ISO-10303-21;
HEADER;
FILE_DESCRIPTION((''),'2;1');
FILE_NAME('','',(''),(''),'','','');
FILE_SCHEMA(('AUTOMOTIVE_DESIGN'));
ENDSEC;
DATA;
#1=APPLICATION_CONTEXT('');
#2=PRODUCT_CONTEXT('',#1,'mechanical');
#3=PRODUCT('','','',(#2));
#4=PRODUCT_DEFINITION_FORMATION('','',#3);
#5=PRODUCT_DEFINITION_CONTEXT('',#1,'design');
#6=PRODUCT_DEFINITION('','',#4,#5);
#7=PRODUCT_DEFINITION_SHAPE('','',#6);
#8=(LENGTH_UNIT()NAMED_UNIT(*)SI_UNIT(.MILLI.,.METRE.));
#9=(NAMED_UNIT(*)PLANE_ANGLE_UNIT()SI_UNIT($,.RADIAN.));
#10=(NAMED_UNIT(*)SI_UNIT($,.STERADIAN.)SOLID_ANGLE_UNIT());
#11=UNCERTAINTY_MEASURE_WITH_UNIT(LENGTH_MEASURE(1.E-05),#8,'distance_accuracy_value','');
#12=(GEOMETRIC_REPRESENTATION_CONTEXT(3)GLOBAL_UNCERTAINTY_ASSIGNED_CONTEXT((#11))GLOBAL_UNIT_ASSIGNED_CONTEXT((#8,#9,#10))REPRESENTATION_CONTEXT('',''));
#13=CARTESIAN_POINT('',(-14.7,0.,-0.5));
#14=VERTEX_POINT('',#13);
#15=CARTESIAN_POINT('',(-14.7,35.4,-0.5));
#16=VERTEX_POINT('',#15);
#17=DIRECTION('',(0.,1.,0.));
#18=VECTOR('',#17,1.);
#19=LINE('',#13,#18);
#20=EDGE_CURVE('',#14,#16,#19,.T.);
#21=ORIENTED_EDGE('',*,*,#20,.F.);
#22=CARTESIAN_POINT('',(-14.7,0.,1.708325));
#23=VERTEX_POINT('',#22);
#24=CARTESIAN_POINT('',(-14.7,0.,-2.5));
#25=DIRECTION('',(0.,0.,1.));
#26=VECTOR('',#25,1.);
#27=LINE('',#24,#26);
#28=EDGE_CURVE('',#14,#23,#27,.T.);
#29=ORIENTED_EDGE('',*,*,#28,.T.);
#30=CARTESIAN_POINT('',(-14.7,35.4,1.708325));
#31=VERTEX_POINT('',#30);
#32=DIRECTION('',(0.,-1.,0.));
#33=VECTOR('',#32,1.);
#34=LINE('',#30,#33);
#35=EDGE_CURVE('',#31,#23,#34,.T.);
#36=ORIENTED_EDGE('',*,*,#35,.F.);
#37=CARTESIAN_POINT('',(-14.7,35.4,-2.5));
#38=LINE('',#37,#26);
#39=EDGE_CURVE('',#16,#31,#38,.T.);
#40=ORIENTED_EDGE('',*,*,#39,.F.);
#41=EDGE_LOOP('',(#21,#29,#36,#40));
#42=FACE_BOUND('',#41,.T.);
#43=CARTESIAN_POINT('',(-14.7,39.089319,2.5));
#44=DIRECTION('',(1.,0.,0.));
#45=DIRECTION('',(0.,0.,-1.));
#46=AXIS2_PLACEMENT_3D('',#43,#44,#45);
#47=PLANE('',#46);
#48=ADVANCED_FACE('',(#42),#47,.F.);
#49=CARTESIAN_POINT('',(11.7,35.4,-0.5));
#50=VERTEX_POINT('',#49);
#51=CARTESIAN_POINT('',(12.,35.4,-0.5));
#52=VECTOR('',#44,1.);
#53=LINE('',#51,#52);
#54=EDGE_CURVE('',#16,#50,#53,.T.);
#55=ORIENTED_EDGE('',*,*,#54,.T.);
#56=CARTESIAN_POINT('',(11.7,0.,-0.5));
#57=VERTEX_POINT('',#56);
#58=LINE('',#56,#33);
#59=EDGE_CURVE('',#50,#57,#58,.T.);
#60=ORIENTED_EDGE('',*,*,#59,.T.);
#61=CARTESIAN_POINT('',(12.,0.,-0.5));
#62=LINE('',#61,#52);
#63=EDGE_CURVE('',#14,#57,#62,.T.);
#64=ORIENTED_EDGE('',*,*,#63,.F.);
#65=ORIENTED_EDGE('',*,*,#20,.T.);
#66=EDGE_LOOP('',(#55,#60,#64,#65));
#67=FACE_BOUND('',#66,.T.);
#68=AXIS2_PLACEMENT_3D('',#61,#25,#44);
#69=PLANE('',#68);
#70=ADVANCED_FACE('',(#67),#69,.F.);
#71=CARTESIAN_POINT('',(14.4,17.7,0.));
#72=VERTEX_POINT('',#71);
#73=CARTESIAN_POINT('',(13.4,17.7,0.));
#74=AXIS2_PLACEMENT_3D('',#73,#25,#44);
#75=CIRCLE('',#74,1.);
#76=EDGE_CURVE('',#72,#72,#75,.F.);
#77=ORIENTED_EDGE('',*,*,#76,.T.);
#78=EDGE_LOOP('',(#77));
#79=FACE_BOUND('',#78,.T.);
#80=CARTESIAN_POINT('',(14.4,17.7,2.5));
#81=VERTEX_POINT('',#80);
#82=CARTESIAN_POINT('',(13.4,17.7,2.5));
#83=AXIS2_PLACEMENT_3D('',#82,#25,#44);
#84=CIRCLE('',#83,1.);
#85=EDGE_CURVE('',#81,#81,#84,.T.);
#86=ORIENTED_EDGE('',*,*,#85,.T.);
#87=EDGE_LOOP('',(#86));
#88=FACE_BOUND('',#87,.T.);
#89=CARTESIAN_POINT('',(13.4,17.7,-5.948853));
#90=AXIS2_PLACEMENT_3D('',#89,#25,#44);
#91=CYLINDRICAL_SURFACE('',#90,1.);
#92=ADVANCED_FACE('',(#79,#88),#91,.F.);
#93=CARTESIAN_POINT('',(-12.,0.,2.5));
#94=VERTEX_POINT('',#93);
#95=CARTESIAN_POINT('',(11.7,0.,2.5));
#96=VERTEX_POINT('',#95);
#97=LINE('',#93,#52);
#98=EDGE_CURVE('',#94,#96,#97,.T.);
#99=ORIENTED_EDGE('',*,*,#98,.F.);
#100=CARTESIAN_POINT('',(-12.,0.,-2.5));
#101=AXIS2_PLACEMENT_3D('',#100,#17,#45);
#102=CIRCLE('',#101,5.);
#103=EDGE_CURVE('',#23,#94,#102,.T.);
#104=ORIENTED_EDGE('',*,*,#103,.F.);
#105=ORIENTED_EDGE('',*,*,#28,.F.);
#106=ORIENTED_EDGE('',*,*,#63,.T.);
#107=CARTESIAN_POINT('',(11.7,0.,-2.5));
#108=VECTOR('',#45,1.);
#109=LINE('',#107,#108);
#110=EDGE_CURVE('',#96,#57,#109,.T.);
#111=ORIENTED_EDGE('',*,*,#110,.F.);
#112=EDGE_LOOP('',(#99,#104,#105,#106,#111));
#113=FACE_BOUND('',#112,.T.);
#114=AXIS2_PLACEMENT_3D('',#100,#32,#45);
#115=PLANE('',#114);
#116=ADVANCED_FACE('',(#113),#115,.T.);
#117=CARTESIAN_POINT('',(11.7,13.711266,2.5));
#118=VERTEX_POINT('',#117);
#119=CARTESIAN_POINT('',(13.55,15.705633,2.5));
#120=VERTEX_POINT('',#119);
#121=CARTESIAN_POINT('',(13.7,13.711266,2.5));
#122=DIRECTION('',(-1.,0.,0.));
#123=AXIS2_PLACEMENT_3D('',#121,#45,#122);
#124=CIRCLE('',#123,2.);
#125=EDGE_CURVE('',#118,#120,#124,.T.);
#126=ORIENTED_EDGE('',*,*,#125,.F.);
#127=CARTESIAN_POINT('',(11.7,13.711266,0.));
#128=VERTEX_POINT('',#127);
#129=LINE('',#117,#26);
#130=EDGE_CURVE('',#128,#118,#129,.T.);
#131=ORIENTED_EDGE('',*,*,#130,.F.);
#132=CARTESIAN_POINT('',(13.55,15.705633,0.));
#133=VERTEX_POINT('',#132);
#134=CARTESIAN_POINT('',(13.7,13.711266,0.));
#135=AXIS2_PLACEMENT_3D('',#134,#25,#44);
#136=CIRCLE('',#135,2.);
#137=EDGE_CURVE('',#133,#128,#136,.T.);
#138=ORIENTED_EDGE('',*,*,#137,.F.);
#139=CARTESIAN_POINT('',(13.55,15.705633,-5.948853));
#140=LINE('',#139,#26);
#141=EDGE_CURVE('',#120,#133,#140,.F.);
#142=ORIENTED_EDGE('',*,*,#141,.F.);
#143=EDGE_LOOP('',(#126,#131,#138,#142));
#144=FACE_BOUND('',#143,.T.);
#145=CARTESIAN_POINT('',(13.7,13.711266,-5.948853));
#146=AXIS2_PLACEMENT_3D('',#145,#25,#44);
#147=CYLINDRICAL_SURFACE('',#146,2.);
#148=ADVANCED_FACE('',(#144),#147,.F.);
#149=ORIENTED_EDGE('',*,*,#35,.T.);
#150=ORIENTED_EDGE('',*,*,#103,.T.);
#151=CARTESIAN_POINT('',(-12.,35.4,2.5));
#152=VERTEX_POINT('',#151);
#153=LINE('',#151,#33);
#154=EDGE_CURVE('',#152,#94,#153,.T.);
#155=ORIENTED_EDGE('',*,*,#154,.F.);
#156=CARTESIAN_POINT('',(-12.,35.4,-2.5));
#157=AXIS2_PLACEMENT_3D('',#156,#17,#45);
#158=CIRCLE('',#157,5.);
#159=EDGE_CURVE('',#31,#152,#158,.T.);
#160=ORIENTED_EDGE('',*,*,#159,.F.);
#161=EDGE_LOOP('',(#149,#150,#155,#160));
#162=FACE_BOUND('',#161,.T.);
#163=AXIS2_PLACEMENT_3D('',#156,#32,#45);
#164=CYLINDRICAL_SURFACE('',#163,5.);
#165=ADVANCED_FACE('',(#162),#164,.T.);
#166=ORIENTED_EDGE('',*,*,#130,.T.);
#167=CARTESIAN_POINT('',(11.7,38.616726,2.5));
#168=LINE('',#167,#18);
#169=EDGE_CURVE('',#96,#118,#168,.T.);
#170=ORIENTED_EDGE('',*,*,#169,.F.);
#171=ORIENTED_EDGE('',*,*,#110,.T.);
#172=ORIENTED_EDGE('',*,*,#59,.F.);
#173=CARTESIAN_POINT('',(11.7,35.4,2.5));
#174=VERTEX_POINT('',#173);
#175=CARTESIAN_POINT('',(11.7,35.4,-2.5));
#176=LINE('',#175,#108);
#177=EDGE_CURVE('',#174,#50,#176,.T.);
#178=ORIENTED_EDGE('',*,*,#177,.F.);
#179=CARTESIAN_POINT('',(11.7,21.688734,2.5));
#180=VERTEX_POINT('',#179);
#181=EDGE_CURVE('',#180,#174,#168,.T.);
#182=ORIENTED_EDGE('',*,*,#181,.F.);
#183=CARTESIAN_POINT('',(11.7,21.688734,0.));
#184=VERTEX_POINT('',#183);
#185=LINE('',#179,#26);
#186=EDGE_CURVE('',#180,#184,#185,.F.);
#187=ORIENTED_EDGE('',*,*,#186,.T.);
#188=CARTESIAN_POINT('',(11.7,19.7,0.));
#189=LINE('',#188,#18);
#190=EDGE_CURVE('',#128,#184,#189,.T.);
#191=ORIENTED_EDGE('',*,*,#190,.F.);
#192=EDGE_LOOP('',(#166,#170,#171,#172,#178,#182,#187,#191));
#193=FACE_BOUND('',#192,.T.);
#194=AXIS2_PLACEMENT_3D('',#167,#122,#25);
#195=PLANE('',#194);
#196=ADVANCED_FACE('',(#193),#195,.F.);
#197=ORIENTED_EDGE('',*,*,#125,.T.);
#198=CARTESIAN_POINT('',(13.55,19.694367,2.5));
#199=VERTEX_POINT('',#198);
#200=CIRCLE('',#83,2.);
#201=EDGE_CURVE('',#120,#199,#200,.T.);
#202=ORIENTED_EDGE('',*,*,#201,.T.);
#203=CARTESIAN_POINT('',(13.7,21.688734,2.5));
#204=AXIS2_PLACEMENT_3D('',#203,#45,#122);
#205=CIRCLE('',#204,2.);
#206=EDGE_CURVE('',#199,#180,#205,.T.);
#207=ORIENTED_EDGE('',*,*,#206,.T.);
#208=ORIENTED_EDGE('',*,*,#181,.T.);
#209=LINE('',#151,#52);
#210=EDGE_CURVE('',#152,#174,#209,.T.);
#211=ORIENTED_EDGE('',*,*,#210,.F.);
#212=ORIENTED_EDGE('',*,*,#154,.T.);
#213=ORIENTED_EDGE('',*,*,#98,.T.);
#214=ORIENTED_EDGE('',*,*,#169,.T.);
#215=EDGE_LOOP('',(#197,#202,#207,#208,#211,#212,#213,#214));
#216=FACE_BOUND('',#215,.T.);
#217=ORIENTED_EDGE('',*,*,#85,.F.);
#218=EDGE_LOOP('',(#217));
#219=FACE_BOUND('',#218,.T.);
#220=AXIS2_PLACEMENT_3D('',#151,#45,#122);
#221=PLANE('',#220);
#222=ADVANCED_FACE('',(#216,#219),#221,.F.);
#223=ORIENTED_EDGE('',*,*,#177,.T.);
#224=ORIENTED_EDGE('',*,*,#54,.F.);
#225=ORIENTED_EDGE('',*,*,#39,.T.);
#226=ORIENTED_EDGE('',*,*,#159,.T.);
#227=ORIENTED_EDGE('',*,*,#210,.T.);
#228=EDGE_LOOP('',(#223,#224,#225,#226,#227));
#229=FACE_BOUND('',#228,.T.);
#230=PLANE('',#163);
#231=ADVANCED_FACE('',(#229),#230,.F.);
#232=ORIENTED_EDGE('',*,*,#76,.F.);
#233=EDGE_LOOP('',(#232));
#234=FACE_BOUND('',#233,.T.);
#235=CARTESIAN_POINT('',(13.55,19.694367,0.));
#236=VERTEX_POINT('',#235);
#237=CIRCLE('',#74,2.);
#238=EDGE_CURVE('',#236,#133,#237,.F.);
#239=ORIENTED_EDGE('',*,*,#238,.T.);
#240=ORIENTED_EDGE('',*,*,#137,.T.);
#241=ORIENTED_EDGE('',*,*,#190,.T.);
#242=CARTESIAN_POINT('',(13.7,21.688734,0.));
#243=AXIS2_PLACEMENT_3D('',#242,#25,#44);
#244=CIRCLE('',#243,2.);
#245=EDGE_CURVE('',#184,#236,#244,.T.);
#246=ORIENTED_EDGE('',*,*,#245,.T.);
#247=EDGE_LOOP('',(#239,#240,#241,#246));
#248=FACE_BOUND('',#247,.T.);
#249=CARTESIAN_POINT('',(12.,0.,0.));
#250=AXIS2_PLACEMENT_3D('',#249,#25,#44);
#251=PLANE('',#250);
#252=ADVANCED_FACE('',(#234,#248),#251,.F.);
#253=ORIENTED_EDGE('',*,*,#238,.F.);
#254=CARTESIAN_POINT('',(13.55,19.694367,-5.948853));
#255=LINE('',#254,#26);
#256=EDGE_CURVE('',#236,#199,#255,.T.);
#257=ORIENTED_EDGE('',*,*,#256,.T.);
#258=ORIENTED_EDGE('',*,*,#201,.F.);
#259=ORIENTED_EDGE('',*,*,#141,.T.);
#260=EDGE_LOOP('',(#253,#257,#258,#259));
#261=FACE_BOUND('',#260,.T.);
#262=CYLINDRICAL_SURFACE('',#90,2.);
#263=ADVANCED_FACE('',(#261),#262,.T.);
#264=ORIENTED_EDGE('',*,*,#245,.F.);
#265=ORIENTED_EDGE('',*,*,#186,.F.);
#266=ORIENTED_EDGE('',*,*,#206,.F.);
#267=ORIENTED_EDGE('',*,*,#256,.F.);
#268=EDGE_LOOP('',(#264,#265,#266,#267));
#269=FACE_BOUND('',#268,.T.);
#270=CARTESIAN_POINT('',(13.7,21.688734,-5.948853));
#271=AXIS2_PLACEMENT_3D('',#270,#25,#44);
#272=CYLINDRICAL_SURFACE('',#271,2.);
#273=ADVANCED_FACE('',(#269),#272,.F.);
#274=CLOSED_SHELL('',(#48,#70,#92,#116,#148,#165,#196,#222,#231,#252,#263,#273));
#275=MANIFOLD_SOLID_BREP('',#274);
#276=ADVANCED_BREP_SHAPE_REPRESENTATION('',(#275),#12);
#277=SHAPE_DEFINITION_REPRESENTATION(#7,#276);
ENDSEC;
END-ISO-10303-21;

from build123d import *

# Parameters (mm, degrees)
BOSS_EXTRUDE1_DEPTH = 35.4
SKETCH2_W           = 28.62824493
SKETCH2_H           = 44.507069041
CUT_EXTRUDE1_DEPTH  = 36
SKETCH3_W           = 27
SKETCH3_H           = 2
CUT_EXTRUDE2_DEPTH  = 39.528041736
SKETCH4_W           = 4.666859097
SKETCH4_H           = 39.875061907
SKETCH4_W_2         = 6.439084071
SKETCH4_H_2         = 41.174693554
CUT_EXTRUDE3_DEPTH  = 39.563713514
SKETCH5_R           = 1
BOSS_EXTRUDE2_DEPTH = 2.5
FILLET1_R           = 2


with BuildPart() as part:
    # Sketch1 → Boss-Extrude1 (new body)
    with BuildSketch(Plane(origin=(0, 0, 0), x_dir=(1, 0, 0), z_dir=(0, 1, 0))):
        with BuildLine():
            Line((-17, 2.5), (-12, 2.5))
            Line((-12, 2.5), (12, 2.5))
            Line((12, 2.5), (12, -2.5))
            Line((12, -2.5), (-12, -2.5))
            ThreePointArc((-12, -2.5), (-15.535533906, -1.035533906), (-17, 2.5))
        make_face()
    extrude(amount=BOSS_EXTRUDE1_DEPTH)

    # Sketch2 → Cut-Extrude1 (cut)
    with BuildSketch(Plane(origin=(0, 0, -2.5), x_dir=(-1, 0, 0), z_dir=(0, 0, -1))):
        with Locations((29.314122465, 17.150131431)):
            Rectangle(SKETCH2_W, SKETCH2_H)
    extrude(amount=-CUT_EXTRUDE1_DEPTH, mode=Mode.SUBTRACT)

    # Sketch3 → Cut-Extrude2 (cut, through all)
    with BuildSketch(Plane(origin=(0, 35.4, 0), x_dir=(1, 0, 0), z_dir=(0, 1, 0))):
        with Locations((-1.5, 1.5)):
            Rectangle(SKETCH3_W, SKETCH3_H)
    extrude(amount=-CUT_EXTRUDE2_DEPTH, mode=Mode.SUBTRACT)

    # Sketch4 → Cut-Extrude3 (cut, through all)
    with BuildSketch(Plane(origin=(0, 0, -0.5), x_dir=(-1, 0, 0), z_dir=(0, 0, -1))):
        with Locations((-14.033429549, 18.67919463)):
            Rectangle(SKETCH4_W, SKETCH4_H)
        with Locations((17.919542036, 18.501972132)):
            Rectangle(SKETCH4_W_2, SKETCH4_H_2)
    extrude(amount=-CUT_EXTRUDE3_DEPTH, mode=Mode.SUBTRACT)

    # Sketch5 → Boss-Extrude2 (add)
    with BuildSketch(Plane.XY.offset(2.5)):
        with BuildLine():
            Line((13.4, 19.7), (11.7, 19.7))
            Line((11.7, 19.7), (11.7, 15.7))
            Line((11.7, 15.7), (13.4, 15.7))
            ThreePointArc((13.4, 15.7), (15.4, 17.7), (13.4, 19.7))
        make_face()
        with Locations((13.4, 17.7)):
            Circle(SKETCH5_R, mode=Mode.SUBTRACT)
    extrude(amount=-BOSS_EXTRUDE2_DEPTH)

    # Fillet1
    # the kernel refuses this fillet: 2 mm, written as the material it adds along each edge
    with BuildSketch(Plane(origin=(11.7, 15.7, 2.5), x_dir=(0, -1, 0), z_dir=(0, 0, -1))) as fillet1_piece_1:
        with BuildLine():
            CenterArc((1.988734135, -2), FILLET1_R, 90, 85.698777695)
            Line((-0.005632932, -1.85), (-0.205069639, -1.835))
            ThreePointArc((-0.205069639, -1.835), (-0.2, -1.7), (-0.2, 0))
            Line((-0.2, 0), (0, 0.2))
            Line((0, 0.2), (1.988734135, 0.2))
            Line((1.988734135, 0.2), (1.988734135, 0))
        make_face()
    extrude(amount=2.5)
    with BuildSketch(Plane(origin=(11.7, 19.7, 2.5), x_dir=(0, 1, 0), z_dir=(0, 0, -1))) as fillet1_piece_2:
        with BuildLine():
            CenterArc((1.988734135, 2), FILLET1_R, 184.301222305, 85.698777695)
            Line((-0.005632932, 1.85), (-0.205069639, 1.835))
            ThreePointArc((-0.205069639, 1.835), (-0.2, 1.7), (-0.2, 0))
            Line((-0.2, 0), (0, -0.2))
            Line((0, -0.2), (1.988734135, -0.2))
            Line((1.988734135, -0.2), (1.988734135, 0))
        make_face()
    extrude(amount=2.5)


solid = part.part
